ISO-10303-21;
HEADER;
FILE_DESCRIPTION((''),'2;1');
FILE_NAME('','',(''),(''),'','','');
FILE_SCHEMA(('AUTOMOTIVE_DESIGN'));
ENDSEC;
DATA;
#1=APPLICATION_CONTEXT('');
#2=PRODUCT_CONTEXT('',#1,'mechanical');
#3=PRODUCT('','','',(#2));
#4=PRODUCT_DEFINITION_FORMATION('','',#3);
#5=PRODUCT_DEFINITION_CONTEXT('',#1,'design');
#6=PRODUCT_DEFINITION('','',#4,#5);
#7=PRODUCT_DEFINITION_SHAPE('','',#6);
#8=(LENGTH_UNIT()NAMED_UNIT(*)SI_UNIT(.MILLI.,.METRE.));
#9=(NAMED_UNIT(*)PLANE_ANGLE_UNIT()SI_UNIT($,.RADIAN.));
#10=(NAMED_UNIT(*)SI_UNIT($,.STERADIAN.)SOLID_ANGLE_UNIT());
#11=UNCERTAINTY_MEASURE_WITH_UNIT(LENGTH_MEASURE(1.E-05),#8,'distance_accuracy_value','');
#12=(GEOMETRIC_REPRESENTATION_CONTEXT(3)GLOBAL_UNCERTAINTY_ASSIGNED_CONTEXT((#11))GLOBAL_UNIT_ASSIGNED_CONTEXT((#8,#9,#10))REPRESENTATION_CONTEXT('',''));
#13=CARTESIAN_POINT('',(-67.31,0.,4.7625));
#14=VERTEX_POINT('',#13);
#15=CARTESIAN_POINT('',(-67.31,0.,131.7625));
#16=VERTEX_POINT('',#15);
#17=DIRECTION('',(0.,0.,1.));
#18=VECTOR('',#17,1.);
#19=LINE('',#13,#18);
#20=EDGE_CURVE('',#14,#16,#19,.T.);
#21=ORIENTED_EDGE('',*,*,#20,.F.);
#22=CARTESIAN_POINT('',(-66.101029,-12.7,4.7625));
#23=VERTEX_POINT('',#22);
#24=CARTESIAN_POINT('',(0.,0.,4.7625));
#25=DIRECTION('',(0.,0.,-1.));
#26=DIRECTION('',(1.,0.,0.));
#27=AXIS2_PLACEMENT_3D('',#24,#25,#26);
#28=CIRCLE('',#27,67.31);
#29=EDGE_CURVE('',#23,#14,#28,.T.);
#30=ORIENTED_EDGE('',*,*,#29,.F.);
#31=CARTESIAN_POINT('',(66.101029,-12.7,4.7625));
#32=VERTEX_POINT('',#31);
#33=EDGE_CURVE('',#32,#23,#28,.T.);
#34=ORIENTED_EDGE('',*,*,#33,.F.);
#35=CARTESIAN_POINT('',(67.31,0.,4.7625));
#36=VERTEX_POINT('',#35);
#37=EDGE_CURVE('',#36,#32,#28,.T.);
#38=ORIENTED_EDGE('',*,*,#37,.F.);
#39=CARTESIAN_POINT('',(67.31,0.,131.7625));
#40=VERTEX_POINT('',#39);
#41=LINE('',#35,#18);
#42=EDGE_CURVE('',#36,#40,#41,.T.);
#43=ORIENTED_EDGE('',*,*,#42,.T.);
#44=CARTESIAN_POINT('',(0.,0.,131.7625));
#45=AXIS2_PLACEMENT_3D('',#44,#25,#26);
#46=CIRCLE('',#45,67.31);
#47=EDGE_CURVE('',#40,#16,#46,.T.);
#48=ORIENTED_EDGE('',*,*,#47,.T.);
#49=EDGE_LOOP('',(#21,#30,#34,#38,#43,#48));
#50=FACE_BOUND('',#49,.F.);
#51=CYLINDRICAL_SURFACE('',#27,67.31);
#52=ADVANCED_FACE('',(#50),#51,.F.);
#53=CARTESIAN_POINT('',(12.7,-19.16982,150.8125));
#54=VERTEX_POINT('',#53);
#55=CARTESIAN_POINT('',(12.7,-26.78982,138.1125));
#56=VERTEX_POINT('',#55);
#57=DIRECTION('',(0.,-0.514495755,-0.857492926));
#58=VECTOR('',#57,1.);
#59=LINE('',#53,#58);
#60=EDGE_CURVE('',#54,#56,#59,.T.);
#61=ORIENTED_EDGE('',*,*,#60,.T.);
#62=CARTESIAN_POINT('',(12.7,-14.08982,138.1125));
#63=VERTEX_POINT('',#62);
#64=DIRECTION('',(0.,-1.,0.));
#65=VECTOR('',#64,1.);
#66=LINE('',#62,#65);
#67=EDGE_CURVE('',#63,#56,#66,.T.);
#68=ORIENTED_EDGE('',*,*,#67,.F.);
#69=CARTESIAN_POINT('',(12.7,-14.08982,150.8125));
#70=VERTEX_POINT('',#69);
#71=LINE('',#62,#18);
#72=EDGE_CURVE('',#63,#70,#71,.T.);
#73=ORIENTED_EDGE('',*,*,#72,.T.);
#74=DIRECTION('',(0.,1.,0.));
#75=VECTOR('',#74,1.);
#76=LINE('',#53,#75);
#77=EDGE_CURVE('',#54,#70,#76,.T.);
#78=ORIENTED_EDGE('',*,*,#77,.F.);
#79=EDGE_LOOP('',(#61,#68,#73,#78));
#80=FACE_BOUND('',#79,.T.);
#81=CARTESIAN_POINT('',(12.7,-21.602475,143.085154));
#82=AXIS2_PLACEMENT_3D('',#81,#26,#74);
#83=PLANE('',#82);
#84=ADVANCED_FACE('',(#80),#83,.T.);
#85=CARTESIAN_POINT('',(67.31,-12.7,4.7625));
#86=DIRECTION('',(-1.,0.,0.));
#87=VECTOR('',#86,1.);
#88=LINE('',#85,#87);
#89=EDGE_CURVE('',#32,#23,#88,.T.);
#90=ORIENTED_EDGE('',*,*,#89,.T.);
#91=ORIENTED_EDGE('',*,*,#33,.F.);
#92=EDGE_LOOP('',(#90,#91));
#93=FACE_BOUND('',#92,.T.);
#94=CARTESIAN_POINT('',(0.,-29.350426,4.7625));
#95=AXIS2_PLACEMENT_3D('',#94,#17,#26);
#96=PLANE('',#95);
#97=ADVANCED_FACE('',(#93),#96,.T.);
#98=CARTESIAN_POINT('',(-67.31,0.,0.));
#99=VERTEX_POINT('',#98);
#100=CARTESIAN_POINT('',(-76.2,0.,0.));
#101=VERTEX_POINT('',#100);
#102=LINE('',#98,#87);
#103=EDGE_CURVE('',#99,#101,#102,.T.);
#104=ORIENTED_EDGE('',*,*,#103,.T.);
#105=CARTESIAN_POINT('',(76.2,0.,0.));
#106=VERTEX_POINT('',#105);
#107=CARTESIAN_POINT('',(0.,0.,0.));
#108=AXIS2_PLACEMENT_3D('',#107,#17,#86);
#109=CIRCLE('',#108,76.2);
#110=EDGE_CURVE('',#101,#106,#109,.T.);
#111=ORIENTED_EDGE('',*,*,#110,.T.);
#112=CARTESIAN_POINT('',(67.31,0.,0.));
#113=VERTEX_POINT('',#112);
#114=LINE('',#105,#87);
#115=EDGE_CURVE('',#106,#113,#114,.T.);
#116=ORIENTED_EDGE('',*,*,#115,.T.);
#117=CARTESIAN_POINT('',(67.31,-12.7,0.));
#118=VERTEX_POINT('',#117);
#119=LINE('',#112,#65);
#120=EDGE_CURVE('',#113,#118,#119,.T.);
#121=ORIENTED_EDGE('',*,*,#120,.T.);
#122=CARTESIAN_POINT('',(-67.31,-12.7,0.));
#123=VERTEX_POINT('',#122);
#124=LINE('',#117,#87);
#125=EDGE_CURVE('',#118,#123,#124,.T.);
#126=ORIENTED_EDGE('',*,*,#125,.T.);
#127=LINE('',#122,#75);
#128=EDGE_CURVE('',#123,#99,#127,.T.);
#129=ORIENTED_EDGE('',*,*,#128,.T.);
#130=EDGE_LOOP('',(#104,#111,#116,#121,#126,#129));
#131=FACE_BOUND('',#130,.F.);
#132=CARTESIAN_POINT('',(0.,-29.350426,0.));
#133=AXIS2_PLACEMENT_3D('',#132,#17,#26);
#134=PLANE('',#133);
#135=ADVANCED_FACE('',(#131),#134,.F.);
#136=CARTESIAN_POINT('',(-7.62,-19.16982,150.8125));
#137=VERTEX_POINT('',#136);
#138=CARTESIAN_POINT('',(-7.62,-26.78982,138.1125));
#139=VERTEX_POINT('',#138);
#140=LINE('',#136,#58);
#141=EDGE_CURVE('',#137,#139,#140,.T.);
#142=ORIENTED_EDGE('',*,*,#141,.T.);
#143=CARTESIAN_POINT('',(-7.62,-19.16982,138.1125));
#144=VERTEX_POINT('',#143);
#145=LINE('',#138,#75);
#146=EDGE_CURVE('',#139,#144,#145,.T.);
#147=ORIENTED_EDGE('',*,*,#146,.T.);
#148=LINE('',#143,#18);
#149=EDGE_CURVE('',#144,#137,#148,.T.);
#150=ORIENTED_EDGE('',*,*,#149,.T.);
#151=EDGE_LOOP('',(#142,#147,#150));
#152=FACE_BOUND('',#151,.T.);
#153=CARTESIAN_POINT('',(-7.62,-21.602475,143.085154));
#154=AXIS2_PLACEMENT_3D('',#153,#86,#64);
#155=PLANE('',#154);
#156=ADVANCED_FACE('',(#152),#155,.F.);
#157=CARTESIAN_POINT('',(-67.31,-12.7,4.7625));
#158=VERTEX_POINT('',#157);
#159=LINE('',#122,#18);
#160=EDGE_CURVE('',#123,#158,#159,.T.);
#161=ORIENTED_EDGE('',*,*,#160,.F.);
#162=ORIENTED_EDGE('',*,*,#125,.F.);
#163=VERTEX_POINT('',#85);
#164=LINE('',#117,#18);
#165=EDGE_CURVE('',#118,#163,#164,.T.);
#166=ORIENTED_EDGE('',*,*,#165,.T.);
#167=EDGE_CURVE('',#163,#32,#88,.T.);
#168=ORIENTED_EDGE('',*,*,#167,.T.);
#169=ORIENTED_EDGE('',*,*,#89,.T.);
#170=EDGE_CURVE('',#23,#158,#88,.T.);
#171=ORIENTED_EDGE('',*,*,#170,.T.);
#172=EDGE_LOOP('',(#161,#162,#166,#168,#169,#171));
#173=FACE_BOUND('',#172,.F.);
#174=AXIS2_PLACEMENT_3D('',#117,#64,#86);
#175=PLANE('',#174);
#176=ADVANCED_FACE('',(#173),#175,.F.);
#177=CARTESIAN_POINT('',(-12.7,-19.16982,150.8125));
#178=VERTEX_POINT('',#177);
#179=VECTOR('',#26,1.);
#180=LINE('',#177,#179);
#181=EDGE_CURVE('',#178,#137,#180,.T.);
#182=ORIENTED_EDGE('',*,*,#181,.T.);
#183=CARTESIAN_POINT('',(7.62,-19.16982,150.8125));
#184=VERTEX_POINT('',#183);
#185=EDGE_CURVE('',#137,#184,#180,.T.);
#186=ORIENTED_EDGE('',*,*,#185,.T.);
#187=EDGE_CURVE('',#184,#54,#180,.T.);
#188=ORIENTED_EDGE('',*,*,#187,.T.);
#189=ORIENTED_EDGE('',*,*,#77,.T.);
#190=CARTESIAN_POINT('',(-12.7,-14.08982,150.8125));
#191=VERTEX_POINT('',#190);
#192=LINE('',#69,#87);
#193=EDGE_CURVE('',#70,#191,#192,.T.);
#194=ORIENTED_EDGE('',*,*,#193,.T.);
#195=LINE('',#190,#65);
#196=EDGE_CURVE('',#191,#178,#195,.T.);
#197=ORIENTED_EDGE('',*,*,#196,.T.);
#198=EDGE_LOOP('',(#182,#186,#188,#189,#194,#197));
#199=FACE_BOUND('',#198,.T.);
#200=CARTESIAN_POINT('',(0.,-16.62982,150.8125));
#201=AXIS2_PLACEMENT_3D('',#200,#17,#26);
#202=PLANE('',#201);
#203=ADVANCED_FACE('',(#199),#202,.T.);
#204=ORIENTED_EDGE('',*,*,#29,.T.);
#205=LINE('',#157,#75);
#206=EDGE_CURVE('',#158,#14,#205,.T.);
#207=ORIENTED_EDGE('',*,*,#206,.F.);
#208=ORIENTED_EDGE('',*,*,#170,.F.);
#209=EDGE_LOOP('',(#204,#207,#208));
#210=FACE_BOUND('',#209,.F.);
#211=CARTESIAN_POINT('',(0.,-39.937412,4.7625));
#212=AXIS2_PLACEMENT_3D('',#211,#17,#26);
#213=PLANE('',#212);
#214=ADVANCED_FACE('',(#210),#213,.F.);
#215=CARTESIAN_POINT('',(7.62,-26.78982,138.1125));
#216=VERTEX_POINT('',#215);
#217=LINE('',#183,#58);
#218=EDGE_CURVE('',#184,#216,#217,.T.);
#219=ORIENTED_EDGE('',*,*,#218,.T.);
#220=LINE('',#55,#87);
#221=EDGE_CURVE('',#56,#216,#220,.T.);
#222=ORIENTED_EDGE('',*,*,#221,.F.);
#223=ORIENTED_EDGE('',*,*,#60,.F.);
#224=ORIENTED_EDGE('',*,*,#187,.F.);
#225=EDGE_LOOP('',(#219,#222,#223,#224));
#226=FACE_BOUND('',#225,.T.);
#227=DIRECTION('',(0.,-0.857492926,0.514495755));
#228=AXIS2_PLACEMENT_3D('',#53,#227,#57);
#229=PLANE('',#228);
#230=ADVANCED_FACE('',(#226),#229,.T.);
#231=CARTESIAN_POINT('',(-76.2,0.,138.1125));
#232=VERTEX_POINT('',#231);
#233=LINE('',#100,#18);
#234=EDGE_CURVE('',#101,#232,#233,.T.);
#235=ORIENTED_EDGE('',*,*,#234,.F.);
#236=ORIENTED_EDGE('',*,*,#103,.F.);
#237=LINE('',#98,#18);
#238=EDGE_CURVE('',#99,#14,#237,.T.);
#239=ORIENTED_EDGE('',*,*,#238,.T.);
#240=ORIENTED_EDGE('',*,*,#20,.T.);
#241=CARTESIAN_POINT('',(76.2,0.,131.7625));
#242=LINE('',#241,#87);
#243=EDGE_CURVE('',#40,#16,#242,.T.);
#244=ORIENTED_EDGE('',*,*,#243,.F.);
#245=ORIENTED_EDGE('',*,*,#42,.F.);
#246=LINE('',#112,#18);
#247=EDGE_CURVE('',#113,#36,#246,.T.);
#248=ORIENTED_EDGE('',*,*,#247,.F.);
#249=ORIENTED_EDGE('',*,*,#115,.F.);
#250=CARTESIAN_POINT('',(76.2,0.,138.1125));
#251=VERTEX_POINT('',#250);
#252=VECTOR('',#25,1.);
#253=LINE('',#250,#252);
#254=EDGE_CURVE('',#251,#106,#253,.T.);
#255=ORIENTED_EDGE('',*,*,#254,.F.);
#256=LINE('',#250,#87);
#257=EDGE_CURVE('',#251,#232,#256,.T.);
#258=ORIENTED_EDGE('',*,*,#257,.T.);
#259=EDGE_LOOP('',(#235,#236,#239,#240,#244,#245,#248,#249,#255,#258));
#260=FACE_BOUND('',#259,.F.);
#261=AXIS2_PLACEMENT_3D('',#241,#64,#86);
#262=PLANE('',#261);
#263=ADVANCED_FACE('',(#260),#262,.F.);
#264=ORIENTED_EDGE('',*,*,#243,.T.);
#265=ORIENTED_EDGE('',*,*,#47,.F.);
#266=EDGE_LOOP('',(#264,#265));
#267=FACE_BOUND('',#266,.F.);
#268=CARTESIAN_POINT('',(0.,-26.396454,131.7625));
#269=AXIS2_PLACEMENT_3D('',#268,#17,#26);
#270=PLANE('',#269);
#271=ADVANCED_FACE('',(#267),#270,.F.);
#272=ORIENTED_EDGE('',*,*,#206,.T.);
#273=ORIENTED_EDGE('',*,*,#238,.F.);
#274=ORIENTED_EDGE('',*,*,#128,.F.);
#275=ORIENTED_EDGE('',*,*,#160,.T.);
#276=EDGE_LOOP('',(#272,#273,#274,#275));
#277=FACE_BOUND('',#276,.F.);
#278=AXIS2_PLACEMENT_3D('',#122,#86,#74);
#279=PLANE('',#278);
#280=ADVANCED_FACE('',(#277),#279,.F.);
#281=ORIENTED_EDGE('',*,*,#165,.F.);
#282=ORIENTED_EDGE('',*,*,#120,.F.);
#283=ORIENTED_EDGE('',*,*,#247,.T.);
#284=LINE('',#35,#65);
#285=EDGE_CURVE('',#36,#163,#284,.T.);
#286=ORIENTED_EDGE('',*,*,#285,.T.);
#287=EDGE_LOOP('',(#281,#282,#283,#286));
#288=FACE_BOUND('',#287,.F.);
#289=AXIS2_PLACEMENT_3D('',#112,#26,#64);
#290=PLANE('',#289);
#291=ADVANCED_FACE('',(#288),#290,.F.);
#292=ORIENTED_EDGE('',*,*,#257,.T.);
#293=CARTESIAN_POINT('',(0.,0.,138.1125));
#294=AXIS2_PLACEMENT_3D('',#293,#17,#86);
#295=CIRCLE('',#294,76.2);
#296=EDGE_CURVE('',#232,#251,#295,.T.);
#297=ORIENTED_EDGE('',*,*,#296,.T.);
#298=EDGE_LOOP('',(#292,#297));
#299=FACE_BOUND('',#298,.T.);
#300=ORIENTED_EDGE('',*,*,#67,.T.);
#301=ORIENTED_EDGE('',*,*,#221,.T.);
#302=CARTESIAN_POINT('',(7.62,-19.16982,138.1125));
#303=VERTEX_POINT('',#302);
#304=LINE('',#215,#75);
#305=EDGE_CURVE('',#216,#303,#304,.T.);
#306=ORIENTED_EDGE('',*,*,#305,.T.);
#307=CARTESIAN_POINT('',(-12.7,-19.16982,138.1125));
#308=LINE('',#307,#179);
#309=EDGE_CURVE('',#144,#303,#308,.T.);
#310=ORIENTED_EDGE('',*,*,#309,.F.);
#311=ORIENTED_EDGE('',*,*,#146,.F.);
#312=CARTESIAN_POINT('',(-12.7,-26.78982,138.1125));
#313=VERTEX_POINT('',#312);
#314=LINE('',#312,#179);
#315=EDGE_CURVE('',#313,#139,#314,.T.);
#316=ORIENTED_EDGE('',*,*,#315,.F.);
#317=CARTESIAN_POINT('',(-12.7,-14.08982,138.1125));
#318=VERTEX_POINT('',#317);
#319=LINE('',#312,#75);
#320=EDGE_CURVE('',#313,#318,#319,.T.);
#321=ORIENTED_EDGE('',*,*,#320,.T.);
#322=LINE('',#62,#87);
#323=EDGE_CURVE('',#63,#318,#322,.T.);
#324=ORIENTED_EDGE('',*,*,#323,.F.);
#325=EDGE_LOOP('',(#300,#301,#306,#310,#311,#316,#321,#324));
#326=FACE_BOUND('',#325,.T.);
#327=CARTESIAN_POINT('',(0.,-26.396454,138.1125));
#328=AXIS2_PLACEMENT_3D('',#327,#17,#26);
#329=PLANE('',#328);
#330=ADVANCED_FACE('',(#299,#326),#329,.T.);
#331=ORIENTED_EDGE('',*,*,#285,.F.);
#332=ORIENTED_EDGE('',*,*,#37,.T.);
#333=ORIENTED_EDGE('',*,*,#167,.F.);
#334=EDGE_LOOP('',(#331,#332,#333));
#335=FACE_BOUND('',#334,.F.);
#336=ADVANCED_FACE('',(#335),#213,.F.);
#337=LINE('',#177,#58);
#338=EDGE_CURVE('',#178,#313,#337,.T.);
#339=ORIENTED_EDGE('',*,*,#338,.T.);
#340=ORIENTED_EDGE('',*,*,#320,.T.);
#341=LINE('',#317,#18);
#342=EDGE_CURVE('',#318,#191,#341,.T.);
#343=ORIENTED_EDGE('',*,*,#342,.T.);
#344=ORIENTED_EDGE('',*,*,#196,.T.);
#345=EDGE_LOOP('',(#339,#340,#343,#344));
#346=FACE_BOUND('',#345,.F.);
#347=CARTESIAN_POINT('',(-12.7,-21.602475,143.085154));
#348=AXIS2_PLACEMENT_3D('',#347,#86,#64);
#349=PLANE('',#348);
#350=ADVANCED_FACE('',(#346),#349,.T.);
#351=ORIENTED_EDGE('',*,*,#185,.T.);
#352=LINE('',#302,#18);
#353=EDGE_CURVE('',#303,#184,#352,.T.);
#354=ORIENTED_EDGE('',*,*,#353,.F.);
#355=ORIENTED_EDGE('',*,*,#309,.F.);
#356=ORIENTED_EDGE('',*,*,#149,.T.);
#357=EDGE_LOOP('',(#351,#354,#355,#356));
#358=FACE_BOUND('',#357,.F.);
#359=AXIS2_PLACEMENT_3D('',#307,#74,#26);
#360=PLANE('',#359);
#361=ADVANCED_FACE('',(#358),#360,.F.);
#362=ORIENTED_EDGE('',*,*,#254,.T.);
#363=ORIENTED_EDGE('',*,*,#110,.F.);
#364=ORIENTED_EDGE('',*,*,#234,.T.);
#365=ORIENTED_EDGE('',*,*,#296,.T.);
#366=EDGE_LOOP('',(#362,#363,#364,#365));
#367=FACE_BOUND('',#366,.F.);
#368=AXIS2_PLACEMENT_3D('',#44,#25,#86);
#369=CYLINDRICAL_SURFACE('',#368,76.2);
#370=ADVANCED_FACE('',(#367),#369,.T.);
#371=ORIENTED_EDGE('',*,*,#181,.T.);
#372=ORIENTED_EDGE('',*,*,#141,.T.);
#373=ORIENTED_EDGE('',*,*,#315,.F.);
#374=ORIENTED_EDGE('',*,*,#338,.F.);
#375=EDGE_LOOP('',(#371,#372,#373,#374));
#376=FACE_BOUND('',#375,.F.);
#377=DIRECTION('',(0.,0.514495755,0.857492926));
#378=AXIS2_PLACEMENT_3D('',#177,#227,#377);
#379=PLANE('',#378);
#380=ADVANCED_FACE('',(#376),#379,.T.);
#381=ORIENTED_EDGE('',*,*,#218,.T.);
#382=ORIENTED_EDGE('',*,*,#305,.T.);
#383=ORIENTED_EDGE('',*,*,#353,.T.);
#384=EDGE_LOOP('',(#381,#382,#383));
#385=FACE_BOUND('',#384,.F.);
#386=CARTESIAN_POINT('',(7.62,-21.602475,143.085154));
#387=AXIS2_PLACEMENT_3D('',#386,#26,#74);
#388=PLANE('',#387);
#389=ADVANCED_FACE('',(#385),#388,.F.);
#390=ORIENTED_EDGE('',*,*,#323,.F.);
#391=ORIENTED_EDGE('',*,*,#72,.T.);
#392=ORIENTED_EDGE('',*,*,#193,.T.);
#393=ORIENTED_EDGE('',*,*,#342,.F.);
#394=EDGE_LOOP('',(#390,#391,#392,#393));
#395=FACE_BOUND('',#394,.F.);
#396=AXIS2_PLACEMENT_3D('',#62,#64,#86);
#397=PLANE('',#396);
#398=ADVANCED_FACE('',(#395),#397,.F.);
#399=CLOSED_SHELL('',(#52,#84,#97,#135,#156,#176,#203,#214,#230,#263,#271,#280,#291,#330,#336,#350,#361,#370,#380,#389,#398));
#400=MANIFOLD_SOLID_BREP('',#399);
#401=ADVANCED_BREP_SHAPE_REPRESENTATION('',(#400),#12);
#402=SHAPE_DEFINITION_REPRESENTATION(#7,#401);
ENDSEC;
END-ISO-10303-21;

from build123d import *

# Parameters (mm, degrees)
F1_DEPTH       = 4.7625
F3_DEPTH       = 127
F5_DEPTH       = 6.35
F7_DEPTH       = 12.7
F9_DEPTH       = 5.08
F11_ANGLE_BACK = 20
F11_ANGLE      = 40
F12_R          = 5.08


# Not quite as in the source:
# - a length typed as a fraction of an inch, garbled in the dataset ("3 / 203.2 mm" for 3/8 in), is restored
# - a pattern or mirror of a feature is missing from the dataset's text; its kind, count and spacing are read off the source's solid


with BuildPart() as f1:
    # F0 (on Top) → F1 (new body)
    with BuildSketch(Plane.XY):
        with BuildLine():
            ThreePointArc((-76.2, 0), (0, -76.2), (76.2, 0))
            Line((76.2, 0), (67.31, 0))
            Line((67.31, 0), (67.31, -12.7))
            Line((67.31, -12.7), (-67.31, -12.7))
            Line((-67.31, -12.7), (-67.31, 0))
            Line((-67.31, 0), (-76.2, 0))
        make_face()
    extrude(amount=F1_DEPTH)

    # F2 (on face) → F3 (join)
    with BuildSketch(Plane.XY.offset(4.7625)):
        with BuildLine():
            Line((-67.31, 0), (-76.2, 0))
            ThreePointArc((-76.2, 0), (0, -76.2), (76.2, 0))
            Line((76.2, 0), (67.31, 0))
            ThreePointArc((67.31, 0), (0, -67.31), (-67.31, 0))
        make_face()
    extrude(amount=F3_DEPTH)

    # F4 (on face) → F5 (join)
    with BuildSketch(Plane.XY.offset(131.7625)):
        with BuildLine():
            Line((76.2, 0), (-76.2, 0))
            ThreePointArc((-76.2, 0), (0, -76.2), (76.2, 0))
        make_face()
    extrude(amount=F5_DEPTH)

    # F6 (on face) → F7 (join)
    with BuildSketch(Plane.XY.offset(138.1125)):
        Polygon((12.7, -14.0898204726), (0, -14.0898204726), (-12.7, -14.0898204726), (-12.7, -19.1698204726), (0, -19.1698204726), (12.7, -19.1698204726), align=None)
    extrude(amount=F7_DEPTH)

    # F8 (on face) → F9 (join)
    with BuildSketch(Plane.YZ.offset(12.7)):
        Polygon((-19.1698204726, 150.8125), (-26.7898204726, 138.1125), (-19.1698204726, 138.1125), align=None)
    f9 = extrude(amount=-F9_DEPTH)

    # F9_copies: F9 across plane
    add(f9.mirror(Plane(origin=(0, 0, 0), x_dir=(0, 0, -1), z_dir=(-1, 0, 0))))


with BuildPart() as f11:
    # F10 (on Right) → F11 (revolve)
    with BuildSketch(Plane.YZ, mode=Mode.PRIVATE) as f11_sk:
        Polygon((-98.6883191255, -24.4902079291), (-69.5020258427, 0), (-76.2, 0), (-76.2, 5.1620067097), (-104.2903103798, -17.814014726), align=None)
    revolve(f11_sk.sketch.rotate(Axis((0, 0, 0), (0, 0, -1)), -F11_ANGLE_BACK), axis=Axis((0, 0, 0), (0, 0, -1)), revolution_arc=F11_ANGLE)

    # F12
    f12_edges = [f11.edges().sort_by_distance(p)[0] for p in [
        (34.71139, -95.36876, -21.152111),
        (-34.71139, -95.36876, -21.152111),
    ]]
    fillet(f12_edges, radius=F12_R)


solid = f1.part
